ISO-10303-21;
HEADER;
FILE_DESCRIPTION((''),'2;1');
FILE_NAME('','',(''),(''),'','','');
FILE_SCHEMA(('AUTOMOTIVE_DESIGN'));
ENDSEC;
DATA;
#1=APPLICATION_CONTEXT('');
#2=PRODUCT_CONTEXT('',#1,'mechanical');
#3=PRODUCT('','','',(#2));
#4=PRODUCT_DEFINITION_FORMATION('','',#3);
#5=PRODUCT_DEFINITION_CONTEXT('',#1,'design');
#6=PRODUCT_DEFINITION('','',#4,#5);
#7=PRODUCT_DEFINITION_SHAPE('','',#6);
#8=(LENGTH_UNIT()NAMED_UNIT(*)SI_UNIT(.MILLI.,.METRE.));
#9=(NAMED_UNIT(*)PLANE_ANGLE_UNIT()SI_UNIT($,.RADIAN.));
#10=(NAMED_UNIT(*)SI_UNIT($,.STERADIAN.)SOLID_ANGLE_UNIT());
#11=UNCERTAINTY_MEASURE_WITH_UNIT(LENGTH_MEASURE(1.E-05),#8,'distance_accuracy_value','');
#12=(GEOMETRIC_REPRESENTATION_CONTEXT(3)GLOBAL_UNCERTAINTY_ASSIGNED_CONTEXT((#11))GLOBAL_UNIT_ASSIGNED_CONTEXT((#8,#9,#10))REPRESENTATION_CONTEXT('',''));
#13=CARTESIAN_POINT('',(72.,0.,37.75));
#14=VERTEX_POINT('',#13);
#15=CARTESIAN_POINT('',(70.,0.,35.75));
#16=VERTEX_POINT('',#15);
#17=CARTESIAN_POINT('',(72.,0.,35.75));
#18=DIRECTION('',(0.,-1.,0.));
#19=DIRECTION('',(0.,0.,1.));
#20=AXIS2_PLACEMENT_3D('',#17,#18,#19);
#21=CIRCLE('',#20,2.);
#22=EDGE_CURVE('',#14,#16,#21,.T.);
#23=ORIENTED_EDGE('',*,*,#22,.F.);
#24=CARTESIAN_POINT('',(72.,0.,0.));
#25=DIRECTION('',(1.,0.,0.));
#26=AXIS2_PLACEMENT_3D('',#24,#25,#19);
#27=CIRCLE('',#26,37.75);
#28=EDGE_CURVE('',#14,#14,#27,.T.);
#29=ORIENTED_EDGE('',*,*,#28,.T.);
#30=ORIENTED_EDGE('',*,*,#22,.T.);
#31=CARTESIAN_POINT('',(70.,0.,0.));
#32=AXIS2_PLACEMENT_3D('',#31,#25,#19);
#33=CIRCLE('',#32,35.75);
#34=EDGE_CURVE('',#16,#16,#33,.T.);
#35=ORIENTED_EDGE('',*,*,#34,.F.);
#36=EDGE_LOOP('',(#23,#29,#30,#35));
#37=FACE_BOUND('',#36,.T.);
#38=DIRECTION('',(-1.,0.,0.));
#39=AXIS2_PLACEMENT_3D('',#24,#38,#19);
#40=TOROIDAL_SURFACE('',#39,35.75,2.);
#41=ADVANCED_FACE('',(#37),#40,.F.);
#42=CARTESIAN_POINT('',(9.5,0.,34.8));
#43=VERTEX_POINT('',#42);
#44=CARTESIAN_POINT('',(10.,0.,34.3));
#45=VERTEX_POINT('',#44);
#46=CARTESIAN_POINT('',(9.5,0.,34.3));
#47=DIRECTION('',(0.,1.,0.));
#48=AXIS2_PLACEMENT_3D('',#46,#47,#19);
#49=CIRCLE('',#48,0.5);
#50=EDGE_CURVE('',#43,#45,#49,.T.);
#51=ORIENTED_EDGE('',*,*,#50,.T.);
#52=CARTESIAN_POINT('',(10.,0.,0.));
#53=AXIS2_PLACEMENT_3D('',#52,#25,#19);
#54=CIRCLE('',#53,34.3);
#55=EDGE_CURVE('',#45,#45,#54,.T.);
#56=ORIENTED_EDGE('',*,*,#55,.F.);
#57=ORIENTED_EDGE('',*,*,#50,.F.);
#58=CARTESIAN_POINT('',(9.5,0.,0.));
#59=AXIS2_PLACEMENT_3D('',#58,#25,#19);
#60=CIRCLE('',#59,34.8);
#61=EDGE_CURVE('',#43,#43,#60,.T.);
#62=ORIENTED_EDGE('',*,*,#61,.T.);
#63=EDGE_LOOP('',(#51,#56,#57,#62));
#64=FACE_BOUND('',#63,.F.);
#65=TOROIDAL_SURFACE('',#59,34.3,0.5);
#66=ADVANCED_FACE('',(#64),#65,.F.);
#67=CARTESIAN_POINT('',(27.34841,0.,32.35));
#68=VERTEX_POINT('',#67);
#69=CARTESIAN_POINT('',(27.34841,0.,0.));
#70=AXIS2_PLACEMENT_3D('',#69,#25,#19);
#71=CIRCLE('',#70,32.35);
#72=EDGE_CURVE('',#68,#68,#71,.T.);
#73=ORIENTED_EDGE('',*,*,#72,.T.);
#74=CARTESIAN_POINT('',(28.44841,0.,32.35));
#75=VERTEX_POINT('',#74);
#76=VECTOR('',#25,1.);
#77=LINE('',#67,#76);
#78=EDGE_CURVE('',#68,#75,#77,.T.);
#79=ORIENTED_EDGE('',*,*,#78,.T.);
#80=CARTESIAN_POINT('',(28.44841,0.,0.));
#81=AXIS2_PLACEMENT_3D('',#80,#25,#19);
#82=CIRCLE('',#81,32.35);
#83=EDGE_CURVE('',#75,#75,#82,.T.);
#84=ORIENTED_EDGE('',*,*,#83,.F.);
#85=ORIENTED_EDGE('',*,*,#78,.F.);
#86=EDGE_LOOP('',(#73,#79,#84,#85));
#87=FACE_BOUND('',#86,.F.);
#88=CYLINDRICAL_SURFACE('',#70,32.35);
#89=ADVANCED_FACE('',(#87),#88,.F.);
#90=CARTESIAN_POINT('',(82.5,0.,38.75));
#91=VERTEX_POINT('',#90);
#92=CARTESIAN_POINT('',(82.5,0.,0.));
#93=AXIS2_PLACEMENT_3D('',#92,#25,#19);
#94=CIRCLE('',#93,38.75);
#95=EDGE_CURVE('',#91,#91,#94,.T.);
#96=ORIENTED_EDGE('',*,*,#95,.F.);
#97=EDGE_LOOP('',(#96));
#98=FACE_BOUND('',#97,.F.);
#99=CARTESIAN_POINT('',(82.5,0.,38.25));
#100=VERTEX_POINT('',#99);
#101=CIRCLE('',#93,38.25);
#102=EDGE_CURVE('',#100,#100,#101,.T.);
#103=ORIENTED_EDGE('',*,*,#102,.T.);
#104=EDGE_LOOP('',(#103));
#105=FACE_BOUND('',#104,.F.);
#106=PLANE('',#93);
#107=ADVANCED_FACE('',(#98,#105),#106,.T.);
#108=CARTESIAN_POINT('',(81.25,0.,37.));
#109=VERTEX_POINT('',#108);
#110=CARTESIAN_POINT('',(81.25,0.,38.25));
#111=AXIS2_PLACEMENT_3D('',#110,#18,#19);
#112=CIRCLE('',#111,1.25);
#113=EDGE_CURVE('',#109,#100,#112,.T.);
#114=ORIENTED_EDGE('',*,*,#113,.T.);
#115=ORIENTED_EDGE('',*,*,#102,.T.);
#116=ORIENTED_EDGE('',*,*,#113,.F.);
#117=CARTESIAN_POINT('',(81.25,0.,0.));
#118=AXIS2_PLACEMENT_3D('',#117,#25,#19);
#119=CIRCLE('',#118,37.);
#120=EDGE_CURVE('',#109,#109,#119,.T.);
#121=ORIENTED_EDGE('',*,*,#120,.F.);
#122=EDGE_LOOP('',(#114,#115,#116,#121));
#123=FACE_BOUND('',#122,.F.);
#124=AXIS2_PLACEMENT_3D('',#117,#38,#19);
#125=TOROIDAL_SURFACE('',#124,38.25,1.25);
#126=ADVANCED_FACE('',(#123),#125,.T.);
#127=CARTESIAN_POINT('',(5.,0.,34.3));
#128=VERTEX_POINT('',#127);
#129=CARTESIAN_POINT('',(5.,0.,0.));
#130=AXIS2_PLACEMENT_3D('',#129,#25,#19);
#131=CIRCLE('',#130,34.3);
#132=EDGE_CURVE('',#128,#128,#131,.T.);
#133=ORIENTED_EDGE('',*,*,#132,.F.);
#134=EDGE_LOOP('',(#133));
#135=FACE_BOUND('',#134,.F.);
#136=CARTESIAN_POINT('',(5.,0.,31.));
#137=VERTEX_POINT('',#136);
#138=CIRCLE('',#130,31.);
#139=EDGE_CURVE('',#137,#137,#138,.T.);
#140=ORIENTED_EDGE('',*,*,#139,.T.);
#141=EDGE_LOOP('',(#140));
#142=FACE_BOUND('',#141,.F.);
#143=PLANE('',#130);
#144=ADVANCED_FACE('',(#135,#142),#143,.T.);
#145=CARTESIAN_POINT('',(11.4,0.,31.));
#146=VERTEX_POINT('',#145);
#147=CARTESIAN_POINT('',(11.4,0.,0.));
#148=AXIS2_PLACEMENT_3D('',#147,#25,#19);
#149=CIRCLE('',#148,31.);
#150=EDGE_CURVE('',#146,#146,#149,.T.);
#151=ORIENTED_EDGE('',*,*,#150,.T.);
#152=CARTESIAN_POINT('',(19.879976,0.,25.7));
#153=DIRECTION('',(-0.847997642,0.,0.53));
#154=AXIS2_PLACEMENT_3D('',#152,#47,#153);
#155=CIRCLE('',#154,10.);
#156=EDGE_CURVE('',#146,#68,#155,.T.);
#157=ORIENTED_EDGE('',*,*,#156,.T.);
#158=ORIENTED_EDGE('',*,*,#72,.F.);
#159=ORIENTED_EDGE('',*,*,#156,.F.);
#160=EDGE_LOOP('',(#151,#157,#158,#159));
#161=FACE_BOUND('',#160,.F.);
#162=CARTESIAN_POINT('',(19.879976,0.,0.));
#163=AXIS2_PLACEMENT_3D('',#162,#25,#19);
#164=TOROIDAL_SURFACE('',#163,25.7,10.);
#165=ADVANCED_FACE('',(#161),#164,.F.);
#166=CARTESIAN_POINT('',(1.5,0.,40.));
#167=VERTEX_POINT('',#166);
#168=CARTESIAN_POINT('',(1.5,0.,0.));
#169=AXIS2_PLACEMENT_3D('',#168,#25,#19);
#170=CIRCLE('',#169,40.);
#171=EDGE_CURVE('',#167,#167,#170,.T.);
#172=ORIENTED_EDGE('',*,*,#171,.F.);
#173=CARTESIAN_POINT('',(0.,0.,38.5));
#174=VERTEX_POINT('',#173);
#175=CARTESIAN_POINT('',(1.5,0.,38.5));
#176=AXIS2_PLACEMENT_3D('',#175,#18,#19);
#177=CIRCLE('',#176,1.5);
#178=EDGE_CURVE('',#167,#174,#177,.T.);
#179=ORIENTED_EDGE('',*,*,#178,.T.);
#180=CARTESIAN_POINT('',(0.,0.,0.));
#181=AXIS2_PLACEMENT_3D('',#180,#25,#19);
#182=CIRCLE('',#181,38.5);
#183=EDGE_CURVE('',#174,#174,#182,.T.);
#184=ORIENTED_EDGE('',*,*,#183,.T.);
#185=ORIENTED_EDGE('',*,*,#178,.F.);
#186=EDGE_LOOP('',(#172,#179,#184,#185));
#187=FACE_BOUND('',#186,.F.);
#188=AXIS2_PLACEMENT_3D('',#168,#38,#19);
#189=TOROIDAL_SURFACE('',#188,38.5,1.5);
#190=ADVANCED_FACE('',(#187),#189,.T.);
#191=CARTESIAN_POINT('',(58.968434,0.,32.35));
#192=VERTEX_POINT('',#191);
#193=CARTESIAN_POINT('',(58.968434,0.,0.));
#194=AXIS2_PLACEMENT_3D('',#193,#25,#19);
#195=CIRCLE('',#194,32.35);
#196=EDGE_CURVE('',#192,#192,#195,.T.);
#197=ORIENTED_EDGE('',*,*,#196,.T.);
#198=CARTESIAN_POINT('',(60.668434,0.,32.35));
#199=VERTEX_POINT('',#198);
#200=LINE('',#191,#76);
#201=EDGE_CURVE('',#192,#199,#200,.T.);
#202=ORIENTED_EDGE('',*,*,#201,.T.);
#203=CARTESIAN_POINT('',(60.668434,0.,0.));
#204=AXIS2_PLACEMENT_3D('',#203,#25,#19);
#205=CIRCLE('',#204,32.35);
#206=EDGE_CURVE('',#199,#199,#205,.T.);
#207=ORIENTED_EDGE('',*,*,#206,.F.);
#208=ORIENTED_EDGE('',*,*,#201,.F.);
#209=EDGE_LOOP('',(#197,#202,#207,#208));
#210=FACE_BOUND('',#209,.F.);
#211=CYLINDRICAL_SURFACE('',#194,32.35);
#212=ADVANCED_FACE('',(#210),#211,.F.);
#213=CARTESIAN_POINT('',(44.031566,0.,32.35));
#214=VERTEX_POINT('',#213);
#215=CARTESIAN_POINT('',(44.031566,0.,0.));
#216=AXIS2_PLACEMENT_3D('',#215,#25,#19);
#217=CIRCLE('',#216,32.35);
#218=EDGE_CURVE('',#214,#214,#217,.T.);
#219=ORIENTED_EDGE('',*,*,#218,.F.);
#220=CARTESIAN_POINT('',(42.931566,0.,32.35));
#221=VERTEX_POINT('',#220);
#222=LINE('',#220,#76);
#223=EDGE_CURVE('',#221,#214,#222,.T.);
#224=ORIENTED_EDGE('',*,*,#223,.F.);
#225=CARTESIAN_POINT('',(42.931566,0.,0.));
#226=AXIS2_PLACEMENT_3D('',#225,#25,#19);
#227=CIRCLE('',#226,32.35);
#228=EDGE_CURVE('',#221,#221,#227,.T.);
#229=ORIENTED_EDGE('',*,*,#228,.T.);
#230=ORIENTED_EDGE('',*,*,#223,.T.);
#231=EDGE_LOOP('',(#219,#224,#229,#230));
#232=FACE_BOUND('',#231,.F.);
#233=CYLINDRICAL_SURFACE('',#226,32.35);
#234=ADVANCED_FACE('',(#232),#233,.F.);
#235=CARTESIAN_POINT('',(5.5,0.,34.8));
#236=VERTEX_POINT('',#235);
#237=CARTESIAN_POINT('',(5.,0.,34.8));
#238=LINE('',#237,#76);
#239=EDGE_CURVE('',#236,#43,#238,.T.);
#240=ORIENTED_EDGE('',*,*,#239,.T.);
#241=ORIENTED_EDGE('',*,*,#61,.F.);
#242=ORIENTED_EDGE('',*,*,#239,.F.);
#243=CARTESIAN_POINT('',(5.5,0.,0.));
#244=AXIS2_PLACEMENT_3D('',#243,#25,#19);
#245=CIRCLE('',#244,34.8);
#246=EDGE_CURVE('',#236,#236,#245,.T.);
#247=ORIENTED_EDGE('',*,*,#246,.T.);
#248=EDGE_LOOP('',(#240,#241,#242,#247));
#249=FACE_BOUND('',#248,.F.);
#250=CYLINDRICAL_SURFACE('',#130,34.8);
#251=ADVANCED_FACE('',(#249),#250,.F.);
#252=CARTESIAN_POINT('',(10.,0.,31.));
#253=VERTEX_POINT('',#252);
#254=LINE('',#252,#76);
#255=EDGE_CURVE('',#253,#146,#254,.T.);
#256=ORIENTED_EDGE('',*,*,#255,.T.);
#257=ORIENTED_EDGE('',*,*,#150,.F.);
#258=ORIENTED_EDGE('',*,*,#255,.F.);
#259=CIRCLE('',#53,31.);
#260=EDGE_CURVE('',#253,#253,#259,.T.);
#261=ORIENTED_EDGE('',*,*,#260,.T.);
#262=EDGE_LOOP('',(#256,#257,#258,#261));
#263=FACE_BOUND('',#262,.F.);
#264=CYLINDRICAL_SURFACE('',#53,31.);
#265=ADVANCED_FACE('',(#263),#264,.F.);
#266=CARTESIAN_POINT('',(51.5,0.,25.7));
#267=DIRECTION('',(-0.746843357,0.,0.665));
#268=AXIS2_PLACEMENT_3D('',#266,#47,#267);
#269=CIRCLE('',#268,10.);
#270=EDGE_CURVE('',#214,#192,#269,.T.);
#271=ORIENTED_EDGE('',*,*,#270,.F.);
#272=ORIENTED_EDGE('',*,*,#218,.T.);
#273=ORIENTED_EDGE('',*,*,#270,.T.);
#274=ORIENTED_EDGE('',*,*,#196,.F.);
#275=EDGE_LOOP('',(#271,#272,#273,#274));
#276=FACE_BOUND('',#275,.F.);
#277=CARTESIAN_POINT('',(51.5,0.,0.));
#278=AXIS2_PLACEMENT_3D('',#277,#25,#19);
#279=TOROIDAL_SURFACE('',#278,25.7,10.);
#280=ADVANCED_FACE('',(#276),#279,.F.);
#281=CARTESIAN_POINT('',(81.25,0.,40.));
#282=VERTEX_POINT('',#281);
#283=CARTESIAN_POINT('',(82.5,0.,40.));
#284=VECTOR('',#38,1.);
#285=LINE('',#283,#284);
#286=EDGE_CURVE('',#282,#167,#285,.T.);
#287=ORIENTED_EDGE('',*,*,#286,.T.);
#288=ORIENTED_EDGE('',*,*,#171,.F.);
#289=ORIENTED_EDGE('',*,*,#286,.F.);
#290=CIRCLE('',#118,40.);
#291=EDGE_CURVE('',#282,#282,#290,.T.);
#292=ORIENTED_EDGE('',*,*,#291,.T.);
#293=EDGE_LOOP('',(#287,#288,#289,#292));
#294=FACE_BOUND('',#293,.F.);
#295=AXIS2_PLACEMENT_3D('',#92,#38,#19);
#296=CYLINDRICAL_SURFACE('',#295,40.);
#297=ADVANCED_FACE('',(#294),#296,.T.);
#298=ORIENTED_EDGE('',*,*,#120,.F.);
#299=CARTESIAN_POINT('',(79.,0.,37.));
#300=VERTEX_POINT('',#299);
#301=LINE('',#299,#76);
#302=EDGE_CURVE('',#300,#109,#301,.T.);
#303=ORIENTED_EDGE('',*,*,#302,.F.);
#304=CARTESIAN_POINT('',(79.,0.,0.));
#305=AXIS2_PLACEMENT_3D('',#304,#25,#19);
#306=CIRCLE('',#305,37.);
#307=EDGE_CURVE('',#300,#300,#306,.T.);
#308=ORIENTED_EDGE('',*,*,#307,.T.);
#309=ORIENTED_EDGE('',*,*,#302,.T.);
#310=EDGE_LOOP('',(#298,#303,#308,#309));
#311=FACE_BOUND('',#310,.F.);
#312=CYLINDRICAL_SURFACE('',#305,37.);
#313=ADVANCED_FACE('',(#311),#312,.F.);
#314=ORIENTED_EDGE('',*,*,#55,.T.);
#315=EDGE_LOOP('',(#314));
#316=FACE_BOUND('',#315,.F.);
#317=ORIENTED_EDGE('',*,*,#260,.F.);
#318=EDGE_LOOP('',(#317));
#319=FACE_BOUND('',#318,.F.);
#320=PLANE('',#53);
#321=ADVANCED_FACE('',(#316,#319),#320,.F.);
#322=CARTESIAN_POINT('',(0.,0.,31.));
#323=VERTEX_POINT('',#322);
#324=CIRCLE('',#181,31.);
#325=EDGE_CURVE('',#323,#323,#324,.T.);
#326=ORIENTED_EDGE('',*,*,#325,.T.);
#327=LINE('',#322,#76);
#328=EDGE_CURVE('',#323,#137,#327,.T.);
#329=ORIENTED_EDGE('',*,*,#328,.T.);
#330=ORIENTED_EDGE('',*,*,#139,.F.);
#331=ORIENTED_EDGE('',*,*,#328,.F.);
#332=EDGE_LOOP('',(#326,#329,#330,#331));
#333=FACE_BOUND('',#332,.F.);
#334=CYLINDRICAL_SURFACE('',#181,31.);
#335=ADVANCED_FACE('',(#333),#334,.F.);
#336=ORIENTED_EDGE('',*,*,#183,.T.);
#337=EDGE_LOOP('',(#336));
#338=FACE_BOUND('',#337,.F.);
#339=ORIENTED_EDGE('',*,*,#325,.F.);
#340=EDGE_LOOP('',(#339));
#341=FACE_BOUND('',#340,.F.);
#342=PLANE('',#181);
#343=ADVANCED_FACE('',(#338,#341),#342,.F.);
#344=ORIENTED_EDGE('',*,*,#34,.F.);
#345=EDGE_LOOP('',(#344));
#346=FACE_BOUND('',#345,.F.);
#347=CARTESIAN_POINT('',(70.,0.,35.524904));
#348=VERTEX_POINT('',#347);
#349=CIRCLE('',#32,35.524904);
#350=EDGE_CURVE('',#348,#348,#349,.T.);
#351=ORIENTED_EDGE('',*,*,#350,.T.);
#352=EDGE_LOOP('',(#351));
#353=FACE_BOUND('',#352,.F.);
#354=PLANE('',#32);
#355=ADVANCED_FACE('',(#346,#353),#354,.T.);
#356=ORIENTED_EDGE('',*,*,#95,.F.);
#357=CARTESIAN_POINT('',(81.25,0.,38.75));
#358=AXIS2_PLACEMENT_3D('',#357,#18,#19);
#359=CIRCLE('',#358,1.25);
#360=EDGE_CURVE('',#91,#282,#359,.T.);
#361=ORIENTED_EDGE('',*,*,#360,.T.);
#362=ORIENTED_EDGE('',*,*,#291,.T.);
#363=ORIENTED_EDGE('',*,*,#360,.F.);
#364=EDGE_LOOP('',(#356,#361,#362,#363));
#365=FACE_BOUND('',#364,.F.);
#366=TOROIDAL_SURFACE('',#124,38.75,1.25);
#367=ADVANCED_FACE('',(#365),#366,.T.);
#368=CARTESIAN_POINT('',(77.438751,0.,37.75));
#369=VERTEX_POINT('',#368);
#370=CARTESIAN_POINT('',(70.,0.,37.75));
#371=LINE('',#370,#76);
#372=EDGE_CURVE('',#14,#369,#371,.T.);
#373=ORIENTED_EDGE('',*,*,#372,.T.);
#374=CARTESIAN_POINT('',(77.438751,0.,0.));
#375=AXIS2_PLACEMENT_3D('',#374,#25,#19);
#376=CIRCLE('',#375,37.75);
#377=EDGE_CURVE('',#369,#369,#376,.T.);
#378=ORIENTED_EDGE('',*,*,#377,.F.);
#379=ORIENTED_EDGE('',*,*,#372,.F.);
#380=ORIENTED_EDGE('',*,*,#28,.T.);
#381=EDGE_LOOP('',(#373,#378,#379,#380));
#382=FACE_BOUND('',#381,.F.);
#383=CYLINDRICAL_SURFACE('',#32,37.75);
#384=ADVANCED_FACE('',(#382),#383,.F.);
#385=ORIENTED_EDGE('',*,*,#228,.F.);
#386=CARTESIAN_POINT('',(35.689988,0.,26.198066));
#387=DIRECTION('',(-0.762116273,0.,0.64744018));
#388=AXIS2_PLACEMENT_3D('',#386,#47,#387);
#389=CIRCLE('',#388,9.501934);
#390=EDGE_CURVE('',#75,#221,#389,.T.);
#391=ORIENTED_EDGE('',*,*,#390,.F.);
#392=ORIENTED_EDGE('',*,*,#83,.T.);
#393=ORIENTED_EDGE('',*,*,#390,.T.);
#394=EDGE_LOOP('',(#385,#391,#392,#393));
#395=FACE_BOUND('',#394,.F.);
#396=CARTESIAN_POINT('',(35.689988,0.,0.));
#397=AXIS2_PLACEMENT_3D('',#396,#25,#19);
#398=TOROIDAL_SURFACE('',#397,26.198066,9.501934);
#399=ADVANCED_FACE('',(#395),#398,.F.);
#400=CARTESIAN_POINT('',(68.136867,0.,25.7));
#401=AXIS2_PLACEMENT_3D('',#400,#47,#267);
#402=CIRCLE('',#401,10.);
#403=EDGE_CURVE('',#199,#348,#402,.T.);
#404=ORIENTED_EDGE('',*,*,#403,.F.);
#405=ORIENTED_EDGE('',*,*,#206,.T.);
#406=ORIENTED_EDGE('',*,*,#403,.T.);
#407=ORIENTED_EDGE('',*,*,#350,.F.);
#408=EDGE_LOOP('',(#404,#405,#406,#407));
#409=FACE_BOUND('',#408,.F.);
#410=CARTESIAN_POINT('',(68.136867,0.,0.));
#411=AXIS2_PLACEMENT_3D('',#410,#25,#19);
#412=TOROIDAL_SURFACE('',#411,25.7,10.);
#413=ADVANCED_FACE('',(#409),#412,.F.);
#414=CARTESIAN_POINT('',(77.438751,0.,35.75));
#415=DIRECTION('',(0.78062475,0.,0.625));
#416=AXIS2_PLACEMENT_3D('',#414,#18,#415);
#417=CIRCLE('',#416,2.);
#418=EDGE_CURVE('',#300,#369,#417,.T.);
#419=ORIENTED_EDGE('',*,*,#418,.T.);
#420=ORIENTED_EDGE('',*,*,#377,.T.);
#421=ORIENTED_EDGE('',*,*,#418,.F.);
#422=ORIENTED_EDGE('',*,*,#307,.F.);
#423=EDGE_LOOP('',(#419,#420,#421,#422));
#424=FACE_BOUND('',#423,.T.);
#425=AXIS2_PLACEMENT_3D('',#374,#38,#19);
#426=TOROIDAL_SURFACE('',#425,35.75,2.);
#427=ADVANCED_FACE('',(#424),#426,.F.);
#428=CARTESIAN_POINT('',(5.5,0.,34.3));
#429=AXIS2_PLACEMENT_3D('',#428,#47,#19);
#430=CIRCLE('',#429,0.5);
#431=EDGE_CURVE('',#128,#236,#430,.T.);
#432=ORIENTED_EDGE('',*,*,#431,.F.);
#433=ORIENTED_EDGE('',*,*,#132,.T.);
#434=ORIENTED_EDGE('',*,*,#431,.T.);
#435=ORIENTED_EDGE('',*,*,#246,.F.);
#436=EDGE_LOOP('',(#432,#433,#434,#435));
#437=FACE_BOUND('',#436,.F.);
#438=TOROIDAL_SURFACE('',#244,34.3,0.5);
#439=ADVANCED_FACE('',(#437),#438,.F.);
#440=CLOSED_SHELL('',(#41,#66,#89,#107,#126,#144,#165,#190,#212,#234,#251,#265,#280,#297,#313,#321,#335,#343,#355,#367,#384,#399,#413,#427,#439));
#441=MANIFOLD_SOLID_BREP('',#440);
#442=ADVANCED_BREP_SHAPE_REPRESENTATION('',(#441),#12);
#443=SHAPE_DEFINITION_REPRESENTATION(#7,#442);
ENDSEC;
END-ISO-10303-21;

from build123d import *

# Parameters (mm, degrees)
F2_R = 0.5
F4_R = 1.25
F5_R = 1.5


# Not quite as in the source:
# - a fillet or chamfer that OpenCascade refuses, or shapes differently, is made with other operations: its cross-section is extruded or revolved along the edge and cut away or added


with BuildPart() as f1:
    # F0 (on Front) → F1 (revolve)
    with BuildSketch(Plane.XZ):
        with BuildLine():
            Line((82.5, 37), (82.5, 40))
            Line((82.5, 40), (0, 40))
            Line((0, 40), (0, 31))
            Line((0, 31), (5, 31))
            Line((5, 31), (5, 34.8))
            Line((5, 34.8), (10, 34.8))
            Line((10, 34.8), (10, 31))
            Line((10, 31), (11.4, 31))
            ThreePointArc((11.4, 31), (19.0365134749, 35.6643650208), (27.3484099858, 32.35))
            Line((27.3484099858, 32.35), (28.4484099858, 32.35))
            ThreePointArc((28.4484099858, 32.35), (35.6899882075, 35.7), (42.9315664293, 32.35))
            Line((42.9315664293, 32.35), (44.0315664293, 32.35))
            ThreePointArc((44.0315664293, 32.35), (51.5, 35.7), (58.9684335707, 32.35))
            Line((58.9684335707, 32.35), (60.6684335707, 32.35))
            ThreePointArc((60.6684335707, 32.35), (64.9158653321, 35.1670558963), (70, 35.5249038647))
            Line((70, 35.5249038647), (70, 37.75))
            Line((70, 37.75), (79, 37.75))
            Line((79, 37.75), (79, 37))
            Line((79, 37), (82.5, 37))
        make_face()
    revolve(axis=Axis((2.4749229779, 0, 0), (1, 0, 0)))

    # F2
    f2_edges = [f1.edges().sort_by_distance(p)[0] for p in [
        (5, 0, -34.8),
        (10, 0, -34.8),
    ]]
    fillet(f2_edges, radius=F2_R)

    # F3: fillet of radius 2 on 2 edges, made by hand

    # F3_s1 → F3_t2 (revolve)
    with BuildSketch(Plane.XZ):
        with BuildLine():
            ThreePointArc((72, 37.75), (70.5857864376, 37.1642135624), (70, 35.75))
            Line((70, 35.75), (70, 37.75))
            Line((70, 37.75), (72, 37.75))
        make_face()
    revolve(axis=Axis((70, 0, 0), (1, 0, 0)))

    # F3_s3 → F3_t4 (revolve)
    with BuildSketch(Plane.XZ):
        with BuildLine():
            ThreePointArc((79, 37), (78.3047759042, 37.5527756377), (77.4387505004, 37.75))
            Line((77.4387505004, 37.75), (79, 37.75))
            Line((79, 37.75), (79, 37))
        make_face()
    revolve(axis=Axis((79, 0, 0), (1, 0, 0)))

    # F4
    f4_edges = [f1.edges().sort_by_distance(p)[0] for p in [
        (82.5, 0, -40),
        (82.5, 0, -37),
    ]]
    fillet(f4_edges, radius=F4_R)

    # F5
    f5_edges = [f1.edges().sort_by_distance(p)[0] for p in [
        (0, 0, -40),
    ]]
    fillet(f5_edges, radius=F5_R)


solid = f1.part
